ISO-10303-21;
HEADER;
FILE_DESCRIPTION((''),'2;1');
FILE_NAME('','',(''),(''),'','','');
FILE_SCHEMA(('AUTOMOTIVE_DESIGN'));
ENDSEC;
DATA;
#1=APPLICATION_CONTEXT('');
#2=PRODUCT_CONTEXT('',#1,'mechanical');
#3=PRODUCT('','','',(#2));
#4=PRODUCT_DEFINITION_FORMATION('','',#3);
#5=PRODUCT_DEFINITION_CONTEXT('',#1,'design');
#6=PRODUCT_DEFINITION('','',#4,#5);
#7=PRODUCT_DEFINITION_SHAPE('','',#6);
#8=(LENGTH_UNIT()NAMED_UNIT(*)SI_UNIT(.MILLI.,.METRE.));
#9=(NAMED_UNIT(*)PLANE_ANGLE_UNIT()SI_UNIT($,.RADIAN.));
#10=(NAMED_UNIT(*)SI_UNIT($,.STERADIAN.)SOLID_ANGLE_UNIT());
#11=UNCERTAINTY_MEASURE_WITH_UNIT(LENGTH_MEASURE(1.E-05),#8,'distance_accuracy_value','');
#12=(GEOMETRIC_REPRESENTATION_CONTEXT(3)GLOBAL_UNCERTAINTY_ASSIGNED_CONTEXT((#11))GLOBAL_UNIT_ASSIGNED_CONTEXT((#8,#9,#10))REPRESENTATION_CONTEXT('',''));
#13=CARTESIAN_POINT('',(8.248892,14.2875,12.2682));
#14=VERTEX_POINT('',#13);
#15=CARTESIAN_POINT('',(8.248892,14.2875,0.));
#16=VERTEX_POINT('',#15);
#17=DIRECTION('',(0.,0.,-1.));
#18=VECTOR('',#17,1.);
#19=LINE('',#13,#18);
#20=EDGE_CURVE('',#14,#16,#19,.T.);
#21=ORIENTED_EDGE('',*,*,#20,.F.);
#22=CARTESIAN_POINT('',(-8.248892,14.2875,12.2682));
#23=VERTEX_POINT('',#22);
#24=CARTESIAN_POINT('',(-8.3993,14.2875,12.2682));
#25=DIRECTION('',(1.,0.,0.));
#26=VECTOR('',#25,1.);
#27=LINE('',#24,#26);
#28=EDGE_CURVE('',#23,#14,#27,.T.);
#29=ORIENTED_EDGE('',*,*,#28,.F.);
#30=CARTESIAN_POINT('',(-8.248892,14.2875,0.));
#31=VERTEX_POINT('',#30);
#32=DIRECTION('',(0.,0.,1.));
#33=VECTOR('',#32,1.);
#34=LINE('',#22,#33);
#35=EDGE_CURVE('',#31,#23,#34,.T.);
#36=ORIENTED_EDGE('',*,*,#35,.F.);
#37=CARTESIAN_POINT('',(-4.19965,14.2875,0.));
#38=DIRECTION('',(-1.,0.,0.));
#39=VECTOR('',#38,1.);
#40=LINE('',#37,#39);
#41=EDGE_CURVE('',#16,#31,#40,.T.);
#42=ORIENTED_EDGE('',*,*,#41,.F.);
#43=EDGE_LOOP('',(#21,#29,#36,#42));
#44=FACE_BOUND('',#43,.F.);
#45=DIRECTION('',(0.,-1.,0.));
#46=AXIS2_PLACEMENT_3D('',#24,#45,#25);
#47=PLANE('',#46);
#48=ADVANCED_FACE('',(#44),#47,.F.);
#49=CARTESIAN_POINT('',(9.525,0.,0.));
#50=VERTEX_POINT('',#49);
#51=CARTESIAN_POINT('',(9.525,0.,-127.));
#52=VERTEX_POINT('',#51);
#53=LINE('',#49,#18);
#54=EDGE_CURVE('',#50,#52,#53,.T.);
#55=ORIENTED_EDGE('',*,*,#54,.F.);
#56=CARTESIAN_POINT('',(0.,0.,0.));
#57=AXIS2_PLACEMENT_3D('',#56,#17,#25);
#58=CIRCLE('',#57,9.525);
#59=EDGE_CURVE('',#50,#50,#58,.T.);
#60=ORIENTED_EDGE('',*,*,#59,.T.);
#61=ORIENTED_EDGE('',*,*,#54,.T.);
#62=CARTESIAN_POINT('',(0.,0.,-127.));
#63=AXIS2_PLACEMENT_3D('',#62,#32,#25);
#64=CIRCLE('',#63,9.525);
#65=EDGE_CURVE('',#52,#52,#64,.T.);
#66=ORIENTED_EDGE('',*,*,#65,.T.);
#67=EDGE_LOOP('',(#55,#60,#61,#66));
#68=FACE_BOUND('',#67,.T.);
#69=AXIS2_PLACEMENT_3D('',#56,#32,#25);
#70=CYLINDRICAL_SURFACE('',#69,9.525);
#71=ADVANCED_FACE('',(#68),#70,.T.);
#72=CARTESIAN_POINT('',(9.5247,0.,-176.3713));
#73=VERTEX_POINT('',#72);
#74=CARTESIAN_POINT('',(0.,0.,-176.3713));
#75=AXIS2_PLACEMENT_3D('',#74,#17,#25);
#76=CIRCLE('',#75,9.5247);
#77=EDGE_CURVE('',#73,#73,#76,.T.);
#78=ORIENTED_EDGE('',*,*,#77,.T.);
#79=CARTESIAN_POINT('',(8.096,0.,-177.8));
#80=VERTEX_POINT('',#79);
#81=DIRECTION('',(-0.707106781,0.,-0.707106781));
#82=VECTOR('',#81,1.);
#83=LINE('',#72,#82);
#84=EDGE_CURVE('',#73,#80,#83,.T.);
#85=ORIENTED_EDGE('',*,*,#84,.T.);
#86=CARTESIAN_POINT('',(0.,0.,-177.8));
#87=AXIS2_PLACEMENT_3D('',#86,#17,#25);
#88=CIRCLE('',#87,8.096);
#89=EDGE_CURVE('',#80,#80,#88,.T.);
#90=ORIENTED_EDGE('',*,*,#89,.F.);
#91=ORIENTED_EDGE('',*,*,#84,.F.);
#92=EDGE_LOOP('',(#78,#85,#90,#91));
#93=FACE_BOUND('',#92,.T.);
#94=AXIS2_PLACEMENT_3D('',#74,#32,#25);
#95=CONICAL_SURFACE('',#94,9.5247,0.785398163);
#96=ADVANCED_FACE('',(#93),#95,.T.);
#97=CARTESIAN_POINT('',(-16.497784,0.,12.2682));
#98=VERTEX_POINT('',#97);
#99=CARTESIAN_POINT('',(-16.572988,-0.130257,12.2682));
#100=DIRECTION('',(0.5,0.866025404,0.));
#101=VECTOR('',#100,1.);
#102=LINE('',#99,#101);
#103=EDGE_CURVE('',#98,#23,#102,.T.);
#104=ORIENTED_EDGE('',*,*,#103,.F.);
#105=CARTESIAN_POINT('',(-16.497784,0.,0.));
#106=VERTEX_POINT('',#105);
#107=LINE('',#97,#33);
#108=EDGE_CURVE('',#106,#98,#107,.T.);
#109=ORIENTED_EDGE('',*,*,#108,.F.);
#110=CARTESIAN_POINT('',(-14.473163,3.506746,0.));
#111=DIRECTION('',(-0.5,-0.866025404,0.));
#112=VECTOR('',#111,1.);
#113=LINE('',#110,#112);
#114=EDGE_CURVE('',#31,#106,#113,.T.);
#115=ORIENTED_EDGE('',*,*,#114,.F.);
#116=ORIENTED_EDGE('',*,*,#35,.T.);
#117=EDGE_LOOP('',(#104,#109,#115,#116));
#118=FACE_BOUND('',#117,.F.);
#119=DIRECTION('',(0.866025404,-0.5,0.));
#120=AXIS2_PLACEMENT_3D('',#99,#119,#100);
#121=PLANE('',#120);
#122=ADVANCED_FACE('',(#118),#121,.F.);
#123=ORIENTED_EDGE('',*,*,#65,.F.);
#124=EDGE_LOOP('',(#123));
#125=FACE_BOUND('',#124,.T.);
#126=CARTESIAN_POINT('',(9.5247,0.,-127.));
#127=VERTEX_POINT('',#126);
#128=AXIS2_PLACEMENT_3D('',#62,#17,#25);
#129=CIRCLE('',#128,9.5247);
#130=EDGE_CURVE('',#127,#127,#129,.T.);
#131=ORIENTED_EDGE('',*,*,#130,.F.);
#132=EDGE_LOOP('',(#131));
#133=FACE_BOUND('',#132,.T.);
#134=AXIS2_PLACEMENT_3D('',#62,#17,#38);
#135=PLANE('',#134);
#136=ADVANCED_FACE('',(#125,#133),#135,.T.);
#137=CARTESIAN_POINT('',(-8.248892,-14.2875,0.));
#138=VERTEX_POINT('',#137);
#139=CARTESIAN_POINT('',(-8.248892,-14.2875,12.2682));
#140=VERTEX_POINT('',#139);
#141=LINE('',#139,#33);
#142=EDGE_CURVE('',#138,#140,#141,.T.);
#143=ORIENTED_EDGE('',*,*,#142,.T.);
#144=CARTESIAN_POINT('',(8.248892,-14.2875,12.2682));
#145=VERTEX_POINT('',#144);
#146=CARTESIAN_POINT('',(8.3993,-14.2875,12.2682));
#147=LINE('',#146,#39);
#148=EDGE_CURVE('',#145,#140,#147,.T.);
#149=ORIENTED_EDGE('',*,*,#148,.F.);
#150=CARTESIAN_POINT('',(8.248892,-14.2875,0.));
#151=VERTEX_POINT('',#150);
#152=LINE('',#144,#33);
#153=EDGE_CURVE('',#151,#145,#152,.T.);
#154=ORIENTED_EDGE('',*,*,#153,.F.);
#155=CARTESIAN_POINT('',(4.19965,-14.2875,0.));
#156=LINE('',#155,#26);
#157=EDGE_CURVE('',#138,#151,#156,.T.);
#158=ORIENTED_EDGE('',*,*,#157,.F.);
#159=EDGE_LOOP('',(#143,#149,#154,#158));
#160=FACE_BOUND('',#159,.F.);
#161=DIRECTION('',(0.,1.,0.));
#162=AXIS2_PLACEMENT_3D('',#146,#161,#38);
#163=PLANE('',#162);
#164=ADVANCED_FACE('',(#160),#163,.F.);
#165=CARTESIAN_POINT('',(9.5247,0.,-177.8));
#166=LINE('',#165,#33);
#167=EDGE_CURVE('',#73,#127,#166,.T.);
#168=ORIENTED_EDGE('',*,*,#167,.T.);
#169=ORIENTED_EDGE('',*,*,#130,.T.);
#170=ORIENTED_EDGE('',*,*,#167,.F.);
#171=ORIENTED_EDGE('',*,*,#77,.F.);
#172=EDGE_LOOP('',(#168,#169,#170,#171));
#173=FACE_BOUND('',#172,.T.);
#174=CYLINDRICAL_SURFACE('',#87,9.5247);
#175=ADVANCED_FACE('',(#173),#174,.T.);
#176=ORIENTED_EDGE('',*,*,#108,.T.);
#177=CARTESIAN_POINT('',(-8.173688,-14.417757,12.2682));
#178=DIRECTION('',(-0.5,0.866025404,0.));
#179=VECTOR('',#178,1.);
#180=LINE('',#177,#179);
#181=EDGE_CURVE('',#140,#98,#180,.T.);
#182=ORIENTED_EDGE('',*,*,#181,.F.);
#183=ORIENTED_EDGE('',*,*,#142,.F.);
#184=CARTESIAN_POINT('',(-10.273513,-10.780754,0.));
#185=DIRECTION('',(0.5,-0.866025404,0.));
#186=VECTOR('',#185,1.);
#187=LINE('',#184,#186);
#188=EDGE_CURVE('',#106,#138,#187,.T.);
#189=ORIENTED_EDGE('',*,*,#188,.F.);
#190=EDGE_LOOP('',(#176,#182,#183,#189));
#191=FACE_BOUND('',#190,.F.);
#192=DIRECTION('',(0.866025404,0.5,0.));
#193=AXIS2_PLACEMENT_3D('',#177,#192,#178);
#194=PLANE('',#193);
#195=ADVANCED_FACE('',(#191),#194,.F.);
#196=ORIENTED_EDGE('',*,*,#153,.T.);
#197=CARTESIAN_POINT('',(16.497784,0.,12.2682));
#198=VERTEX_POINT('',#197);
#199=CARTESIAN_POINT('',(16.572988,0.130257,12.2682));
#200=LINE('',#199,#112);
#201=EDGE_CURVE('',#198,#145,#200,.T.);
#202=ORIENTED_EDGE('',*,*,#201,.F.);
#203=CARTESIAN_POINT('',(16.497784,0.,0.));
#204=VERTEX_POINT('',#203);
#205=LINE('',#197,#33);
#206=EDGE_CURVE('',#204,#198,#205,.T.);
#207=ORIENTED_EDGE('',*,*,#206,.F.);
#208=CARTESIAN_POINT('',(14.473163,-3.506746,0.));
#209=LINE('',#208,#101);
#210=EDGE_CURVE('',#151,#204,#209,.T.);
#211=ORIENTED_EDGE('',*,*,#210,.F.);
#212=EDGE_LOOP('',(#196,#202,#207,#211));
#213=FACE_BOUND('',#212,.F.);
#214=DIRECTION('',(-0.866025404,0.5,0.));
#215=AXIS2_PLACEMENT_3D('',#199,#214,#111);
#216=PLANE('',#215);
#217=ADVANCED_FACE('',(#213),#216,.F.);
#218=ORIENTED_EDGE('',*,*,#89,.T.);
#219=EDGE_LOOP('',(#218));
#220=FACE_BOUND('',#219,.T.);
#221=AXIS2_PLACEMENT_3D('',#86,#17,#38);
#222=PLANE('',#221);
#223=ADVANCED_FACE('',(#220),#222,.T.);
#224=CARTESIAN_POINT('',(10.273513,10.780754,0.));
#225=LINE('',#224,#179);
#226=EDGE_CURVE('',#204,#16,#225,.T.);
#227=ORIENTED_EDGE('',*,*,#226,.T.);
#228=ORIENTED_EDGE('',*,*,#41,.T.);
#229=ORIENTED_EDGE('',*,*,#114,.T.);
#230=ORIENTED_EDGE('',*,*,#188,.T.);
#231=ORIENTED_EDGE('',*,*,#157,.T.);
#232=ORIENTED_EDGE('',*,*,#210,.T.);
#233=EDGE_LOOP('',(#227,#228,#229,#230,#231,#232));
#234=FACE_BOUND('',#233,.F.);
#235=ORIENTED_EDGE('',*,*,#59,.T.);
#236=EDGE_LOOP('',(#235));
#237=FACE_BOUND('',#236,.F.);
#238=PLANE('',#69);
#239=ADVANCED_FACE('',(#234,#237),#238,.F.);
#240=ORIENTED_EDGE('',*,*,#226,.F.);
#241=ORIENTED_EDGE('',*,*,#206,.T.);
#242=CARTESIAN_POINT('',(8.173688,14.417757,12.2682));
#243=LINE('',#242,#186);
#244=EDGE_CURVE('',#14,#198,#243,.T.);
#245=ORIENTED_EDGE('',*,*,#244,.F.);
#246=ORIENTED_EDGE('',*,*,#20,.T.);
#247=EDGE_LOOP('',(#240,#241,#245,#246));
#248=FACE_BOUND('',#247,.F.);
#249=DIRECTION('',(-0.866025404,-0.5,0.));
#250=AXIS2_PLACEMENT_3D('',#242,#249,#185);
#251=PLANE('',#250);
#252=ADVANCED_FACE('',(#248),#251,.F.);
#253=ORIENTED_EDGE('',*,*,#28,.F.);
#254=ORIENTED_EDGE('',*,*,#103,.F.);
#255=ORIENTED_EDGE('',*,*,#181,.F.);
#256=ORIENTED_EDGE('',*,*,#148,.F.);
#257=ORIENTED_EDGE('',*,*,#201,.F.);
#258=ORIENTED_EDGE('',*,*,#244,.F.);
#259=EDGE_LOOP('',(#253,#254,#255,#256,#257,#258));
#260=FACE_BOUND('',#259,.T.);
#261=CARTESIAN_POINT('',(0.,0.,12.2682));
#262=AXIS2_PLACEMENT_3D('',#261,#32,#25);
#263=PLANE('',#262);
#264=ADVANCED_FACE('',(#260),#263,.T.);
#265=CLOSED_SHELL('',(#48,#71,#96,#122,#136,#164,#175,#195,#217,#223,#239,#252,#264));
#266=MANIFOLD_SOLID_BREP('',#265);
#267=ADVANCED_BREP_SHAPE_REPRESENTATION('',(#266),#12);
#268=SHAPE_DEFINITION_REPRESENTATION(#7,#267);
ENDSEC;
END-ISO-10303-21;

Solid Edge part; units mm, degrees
sketch "Sketch1" plane through (0, 0, 0) normal (0, 0, 1) x (1, 0, 0)
  circle A0 centre (0, 0) radius 16.5735
  dimension "D1" = 33.147
extrude "Protrusion1" add sketch "Sketch1" along normal blind 12.2682
sketch "Sketch2" plane through (0, 0, 0) normal (0, 0, -1) x (1, 0, 0)
  circle A0 centre (0, 0) radius 9.525
extrude "Protrusion2" add sketch "Sketch2" along normal blind 177.8
sketch "Sketch3" plane through (0, 0, -177.8) normal (0, 0, -1) x (1, 0, 0)
  circle A0 centre (0, 0) radius 9.5247
extrude "Cutout1" cut sketch "Sketch3" against normal blind 50.8 flip side to cut
chamfer "Chamfer_1" distance 1.4287 angle 45 1 edges at (-9.5247, 0, -177.8)
sketch "Sketch4" plane through (0, 0, 12.2682) normal (0, 0, 1) x (1, 0, 0)
  line L0 (-8.3993, 14.2875) -> (8.3993, 14.2875)
  dimension "D1" = 28.575
extrude "Cutout2" cut sketch "Sketch4" against normal up to next material side at (0, 14.3375, 12.2682)
pattern_circular "Pattern1" count 6 over 360 about axis through (0, 0, 12.2682) along (0, 0, 1) of "Cutout2"
properties part number "24101337"
